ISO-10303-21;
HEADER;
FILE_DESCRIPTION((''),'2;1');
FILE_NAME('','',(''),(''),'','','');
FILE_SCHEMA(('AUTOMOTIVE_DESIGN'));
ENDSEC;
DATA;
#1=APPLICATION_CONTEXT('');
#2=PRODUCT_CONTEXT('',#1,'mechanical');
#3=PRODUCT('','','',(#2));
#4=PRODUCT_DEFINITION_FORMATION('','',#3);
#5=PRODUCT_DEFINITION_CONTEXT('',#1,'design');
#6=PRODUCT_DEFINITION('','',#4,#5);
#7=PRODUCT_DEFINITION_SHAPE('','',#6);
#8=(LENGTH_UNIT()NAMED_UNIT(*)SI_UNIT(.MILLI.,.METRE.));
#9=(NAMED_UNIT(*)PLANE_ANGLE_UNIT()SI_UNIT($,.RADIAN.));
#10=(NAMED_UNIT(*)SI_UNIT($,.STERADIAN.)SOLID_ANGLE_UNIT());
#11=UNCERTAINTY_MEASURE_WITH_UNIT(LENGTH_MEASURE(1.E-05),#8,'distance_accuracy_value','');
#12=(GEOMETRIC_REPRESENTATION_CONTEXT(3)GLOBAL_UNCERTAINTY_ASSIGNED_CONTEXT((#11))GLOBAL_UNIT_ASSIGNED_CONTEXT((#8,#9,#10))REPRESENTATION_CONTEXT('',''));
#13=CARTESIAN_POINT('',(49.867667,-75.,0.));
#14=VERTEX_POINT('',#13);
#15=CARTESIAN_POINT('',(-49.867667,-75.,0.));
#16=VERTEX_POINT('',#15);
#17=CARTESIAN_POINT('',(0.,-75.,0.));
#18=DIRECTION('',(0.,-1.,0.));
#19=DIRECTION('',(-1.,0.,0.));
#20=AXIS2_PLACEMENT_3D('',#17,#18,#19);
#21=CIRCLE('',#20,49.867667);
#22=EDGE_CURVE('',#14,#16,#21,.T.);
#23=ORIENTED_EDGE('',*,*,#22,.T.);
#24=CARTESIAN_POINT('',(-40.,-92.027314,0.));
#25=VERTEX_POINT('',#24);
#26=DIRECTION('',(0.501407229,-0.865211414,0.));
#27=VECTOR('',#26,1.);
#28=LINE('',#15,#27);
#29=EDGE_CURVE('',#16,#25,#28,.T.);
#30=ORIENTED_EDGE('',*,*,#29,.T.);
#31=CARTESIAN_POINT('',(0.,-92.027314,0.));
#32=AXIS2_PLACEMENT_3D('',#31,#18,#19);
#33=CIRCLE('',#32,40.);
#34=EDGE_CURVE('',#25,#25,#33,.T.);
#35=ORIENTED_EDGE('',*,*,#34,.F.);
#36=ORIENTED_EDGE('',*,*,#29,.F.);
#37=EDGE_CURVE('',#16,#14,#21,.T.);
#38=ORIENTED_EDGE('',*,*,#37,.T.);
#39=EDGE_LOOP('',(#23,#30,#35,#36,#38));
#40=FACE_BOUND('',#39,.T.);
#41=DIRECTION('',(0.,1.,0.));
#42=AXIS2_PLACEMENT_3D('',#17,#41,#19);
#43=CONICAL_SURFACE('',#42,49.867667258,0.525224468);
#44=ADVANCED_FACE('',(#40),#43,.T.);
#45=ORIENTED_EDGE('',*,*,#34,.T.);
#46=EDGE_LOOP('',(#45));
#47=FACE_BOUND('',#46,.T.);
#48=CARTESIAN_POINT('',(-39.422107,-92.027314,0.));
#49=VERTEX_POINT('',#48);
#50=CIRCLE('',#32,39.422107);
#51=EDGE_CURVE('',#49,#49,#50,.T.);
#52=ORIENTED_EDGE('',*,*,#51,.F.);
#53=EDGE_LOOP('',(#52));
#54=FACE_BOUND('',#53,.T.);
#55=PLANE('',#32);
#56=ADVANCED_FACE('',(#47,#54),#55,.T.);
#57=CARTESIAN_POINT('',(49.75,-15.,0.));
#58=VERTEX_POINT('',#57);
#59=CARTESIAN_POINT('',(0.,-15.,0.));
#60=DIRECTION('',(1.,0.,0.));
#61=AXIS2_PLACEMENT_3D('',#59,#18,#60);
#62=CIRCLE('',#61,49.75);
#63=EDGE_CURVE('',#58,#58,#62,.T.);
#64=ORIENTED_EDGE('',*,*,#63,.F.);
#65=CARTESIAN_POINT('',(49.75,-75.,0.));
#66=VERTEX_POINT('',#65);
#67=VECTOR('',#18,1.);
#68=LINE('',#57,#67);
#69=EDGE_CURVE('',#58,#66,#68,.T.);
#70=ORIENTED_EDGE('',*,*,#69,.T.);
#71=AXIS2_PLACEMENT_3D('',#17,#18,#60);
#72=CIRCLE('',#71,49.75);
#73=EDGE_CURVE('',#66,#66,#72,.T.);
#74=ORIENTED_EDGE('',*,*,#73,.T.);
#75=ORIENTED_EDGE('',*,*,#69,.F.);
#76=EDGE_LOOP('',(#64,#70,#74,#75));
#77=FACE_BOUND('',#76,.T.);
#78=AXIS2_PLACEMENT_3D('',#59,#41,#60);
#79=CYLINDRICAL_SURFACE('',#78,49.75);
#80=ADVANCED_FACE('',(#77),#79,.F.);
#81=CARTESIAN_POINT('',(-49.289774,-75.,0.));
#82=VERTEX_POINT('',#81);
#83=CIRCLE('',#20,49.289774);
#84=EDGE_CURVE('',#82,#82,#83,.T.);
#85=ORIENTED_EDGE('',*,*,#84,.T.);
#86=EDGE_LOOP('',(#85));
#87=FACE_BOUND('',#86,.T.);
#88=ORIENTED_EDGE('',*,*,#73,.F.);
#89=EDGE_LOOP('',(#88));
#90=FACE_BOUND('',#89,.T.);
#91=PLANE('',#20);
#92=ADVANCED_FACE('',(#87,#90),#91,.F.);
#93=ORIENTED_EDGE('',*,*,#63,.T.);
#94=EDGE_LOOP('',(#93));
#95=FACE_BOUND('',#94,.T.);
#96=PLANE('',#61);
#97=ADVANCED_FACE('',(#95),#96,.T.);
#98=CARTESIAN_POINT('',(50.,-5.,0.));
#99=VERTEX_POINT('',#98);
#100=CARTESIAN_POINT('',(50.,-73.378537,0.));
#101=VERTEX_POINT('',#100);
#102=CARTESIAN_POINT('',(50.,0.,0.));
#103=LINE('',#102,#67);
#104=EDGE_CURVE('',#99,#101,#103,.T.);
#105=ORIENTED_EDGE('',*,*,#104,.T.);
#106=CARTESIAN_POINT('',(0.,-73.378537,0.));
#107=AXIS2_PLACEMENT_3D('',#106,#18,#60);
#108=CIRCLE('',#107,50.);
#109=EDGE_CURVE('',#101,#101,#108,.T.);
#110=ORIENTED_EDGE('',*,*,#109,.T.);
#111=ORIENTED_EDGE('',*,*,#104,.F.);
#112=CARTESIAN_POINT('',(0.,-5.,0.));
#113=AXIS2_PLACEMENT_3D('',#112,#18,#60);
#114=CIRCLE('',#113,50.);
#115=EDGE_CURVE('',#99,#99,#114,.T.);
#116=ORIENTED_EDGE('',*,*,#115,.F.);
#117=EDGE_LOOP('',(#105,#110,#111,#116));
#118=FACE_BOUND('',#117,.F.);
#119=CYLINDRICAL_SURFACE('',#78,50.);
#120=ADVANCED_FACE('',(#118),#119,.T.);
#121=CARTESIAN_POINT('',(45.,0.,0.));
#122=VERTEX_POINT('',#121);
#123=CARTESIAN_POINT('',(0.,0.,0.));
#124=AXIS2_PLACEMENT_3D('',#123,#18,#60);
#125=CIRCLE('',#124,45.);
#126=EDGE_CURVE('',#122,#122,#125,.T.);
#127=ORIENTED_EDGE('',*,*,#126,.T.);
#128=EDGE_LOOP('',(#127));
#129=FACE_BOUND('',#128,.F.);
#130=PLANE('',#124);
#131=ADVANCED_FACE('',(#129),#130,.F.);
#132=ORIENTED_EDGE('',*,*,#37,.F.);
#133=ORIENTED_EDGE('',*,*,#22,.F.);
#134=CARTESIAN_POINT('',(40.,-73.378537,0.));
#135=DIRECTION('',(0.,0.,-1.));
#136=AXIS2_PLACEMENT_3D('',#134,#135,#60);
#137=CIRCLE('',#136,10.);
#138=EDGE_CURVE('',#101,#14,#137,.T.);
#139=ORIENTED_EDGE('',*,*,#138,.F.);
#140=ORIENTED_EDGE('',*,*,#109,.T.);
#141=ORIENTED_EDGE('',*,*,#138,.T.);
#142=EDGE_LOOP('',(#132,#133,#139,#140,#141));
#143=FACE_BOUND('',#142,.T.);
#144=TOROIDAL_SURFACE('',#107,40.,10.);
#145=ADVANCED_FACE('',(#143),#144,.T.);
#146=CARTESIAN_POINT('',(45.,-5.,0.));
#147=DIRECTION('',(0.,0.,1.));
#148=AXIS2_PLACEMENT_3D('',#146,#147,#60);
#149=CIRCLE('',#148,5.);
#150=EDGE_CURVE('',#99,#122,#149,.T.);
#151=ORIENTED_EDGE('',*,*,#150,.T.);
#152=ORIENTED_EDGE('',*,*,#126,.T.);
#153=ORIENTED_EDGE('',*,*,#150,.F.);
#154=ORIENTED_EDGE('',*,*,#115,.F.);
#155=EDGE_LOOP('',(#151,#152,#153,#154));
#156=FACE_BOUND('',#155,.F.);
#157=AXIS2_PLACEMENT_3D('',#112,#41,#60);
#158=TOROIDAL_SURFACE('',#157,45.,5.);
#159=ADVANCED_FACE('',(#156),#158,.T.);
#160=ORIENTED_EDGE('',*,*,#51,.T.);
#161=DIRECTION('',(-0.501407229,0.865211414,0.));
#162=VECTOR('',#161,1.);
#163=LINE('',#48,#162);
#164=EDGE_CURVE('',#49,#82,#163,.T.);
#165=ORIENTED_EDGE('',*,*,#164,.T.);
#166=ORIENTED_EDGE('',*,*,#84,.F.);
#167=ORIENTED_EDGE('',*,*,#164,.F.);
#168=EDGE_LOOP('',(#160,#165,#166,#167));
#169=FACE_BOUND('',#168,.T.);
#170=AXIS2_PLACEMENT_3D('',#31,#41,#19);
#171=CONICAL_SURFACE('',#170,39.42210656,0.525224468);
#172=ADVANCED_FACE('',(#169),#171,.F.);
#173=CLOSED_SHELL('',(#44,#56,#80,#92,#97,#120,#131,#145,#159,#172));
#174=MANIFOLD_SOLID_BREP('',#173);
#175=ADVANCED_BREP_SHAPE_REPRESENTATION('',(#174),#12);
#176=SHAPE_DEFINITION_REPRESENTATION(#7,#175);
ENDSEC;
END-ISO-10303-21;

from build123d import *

# Parameters (mm, degrees)
F0_R     = 50
F1_DEPTH = 15
F2_R     = 50
F2_R_2   = 49.75
F3_DEPTH = 60
F6_R     = 5


# Not quite as in the source:
# - a fillet or chamfer that OpenCascade refuses, or shapes differently, is made with other operations: its cross-section is extruded or revolved along the edge and cut away or added


with BuildPart() as f1:
    # F0 (on Front) → F1 (new body)
    with BuildSketch(Plane.XZ):
        Circle(F0_R)
    extrude(amount=F1_DEPTH)

    # F2 (on face) → F3 (join)
    with BuildSketch(Plane.XZ.offset(15)):
        Circle(F2_R)
        Circle(F2_R_2, mode=Mode.SUBTRACT)
    extrude(amount=F3_DEPTH)

    # F4 (on Top) → F5 (revolve)
    with BuildSketch(Plane.XY):
        Polygon((-40, -92.0273140073), (-39.4221065602, -92.0273140073), (-49.289773818, -75), (-49.8676672578, -75), align=None)
    revolve(axis=Axis((0, -82.0273140073, 0), (0, -1, 0)))

    # F6
    f6_edges = [f1.edges().sort_by_distance(p)[0] for p in [
        (-50, 0, 0),
    ]]
    fillet(f6_edges, radius=F6_R)

    # F7: fillet of radius 10 on 1 edges, made by hand

    # F7_s1 → F7_t2 (revolve, cut)
    with BuildSketch(Plane.XY):
        with BuildLine():
            ThreePointArc((50, -73.378536806), (49.9668619078, -74.1919639453), (49.8676672578, -75))
            Line((49.8676672578, -75), (50, -75))
            Line((50, -75), (50, -73.378536806))
        make_face()
    revolve(axis=Axis((0, -75, 0), (0, -1, 0)), mode=Mode.SUBTRACT)


solid = f1.part
